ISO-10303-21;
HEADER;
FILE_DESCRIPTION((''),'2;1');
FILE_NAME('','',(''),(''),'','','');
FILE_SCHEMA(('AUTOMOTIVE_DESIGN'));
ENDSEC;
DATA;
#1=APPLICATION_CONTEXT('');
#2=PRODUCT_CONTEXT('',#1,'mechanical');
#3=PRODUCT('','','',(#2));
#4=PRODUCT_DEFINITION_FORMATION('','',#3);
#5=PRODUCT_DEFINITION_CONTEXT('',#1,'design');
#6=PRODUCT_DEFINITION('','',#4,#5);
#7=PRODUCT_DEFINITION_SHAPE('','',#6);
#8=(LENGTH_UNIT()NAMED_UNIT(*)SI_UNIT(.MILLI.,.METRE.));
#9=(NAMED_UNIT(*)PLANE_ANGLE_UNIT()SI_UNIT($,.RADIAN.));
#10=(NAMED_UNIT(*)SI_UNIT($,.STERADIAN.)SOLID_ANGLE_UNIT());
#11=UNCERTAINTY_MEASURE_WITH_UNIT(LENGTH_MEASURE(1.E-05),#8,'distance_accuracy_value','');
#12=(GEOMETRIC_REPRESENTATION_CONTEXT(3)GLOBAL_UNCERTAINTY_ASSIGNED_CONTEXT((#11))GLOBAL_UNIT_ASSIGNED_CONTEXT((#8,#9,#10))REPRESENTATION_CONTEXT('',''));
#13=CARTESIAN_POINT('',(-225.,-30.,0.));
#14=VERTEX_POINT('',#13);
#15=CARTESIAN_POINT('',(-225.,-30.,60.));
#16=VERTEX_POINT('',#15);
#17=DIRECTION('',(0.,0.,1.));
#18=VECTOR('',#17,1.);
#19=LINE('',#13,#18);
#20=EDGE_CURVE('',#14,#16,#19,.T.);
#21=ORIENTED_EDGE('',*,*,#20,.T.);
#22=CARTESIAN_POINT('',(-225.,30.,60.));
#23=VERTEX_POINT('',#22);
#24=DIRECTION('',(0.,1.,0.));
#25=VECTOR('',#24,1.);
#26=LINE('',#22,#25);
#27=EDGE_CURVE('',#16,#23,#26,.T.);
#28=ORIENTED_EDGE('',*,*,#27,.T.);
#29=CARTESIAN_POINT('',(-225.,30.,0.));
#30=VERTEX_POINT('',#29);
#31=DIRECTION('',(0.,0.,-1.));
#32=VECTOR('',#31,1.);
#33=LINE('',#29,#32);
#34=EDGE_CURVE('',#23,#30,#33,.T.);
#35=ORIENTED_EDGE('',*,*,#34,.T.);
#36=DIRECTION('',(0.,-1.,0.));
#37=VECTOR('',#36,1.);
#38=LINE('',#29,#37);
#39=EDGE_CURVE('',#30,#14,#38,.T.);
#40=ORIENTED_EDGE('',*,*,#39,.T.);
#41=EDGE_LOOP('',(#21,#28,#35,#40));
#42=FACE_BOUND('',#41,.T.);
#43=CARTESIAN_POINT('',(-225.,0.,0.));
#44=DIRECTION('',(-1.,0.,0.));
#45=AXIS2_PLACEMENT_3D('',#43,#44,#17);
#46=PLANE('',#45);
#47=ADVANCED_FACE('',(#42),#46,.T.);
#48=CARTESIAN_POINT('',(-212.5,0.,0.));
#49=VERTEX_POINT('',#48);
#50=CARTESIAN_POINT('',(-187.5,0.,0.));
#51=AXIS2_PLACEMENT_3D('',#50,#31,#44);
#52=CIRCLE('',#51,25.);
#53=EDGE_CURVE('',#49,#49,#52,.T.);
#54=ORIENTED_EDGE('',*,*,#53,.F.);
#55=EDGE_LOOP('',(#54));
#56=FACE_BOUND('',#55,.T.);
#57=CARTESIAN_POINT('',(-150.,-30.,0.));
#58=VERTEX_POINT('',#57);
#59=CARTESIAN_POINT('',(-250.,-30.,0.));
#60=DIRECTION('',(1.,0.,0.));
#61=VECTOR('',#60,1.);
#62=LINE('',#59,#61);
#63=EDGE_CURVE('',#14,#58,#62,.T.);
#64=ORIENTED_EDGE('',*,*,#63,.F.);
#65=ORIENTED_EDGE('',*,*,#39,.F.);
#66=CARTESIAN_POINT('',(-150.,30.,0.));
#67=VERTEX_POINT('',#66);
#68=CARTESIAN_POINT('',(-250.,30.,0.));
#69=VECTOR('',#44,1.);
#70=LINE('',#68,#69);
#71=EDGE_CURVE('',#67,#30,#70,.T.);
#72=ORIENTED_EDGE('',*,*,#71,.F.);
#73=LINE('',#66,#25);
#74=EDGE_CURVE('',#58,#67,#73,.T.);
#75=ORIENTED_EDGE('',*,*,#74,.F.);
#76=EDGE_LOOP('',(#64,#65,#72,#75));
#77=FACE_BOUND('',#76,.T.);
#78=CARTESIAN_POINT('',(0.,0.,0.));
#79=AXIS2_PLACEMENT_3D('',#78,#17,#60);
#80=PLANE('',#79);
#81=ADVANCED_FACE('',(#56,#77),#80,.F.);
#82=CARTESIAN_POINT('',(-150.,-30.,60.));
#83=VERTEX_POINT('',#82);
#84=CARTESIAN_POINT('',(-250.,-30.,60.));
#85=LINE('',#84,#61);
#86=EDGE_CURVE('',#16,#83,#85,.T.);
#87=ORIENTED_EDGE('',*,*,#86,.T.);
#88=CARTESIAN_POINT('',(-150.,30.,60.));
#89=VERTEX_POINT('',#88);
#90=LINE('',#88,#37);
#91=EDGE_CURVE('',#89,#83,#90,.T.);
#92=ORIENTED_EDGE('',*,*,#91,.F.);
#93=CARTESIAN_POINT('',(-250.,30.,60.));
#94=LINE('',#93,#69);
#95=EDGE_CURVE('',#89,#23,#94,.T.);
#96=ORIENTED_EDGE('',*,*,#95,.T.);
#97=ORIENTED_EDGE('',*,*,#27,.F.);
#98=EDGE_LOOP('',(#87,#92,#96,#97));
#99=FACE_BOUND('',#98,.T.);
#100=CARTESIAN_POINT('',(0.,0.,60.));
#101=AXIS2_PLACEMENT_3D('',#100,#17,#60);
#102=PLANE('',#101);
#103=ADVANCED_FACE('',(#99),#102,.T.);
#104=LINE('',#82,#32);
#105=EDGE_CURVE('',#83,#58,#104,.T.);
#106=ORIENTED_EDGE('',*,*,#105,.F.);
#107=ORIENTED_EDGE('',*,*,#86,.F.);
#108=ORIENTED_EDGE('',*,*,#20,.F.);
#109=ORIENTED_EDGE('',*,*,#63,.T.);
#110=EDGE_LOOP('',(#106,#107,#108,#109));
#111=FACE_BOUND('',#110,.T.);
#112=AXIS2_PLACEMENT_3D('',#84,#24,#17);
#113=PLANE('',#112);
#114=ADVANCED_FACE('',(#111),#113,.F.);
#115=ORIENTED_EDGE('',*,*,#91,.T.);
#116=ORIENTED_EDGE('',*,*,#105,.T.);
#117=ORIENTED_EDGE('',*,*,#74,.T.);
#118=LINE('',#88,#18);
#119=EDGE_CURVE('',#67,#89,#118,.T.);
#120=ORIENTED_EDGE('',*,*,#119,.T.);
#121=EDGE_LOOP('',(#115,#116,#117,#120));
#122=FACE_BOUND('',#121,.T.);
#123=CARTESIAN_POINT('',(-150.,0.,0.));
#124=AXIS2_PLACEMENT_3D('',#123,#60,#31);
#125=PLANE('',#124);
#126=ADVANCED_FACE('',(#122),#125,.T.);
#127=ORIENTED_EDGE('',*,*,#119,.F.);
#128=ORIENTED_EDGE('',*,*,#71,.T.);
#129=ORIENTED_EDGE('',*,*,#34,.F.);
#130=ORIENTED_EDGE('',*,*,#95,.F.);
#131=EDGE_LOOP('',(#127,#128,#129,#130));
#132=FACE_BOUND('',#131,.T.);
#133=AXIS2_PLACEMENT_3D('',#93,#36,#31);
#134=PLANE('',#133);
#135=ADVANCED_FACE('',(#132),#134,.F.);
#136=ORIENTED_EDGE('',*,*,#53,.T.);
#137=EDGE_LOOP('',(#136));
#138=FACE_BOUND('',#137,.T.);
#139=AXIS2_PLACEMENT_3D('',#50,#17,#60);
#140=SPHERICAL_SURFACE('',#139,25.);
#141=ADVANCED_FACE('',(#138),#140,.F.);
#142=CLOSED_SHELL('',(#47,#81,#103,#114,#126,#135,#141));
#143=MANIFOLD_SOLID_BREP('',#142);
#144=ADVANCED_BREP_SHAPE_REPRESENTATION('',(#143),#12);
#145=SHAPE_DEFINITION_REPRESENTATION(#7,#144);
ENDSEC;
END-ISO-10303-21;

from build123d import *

# Parameters (mm, degrees)
SZKIC1_W                    = 500
SZKIC1_H                    = 60
DODANIE_WYCI_GNI_CIE1_DEPTH = 60
SZKIC2_R                    = 25
WYTNIJ_WYCI_GNI_CIE1_DEPTH  = 25
ZAOKR_GLENIE2_R             = 25
SZKIC5_W                    = 60
SZKIC5_H                    = 60
WYTNIJ_WYCI_GNI_CIE2_DEPTH  = 400
SZKIC6_W                    = 60
SZKIC6_H                    = 60
WYTNIJ_WYCI_GNI_CIE4_DEPTH  = 25


with BuildPart() as part:
    # Szkic1 → Dodanie-wyciągnięcie1 (new body)
    with BuildSketch(Plane.XY):
        Rectangle(SZKIC1_W, SZKIC1_H)
    extrude(amount=DODANIE_WYCI_GNI_CIE1_DEPTH)

    # Szkic2 → Wytnij-wyciągnięcie1 (cut)
    with BuildSketch(Plane(origin=(0, 0, 0), x_dir=(-1, 0, 0), z_dir=(0, 0, -1))):
        with Locations((-187.5, 0)):
            Circle(SZKIC2_R)
        with Locations((-125, 0)):
            Circle(SZKIC2_R)
        with Locations((-62.5, 0)):
            Circle(SZKIC2_R)
        Circle(SZKIC2_R)
        with Locations((62.5, 0)):
            Circle(SZKIC2_R)
        with Locations((125, 0)):
            Circle(SZKIC2_R)
        with Locations((187.5, 0)):
            Circle(SZKIC2_R)
    extrude(amount=-WYTNIJ_WYCI_GNI_CIE1_DEPTH, mode=Mode.SUBTRACT)

    # Zaokrąglenie2
    zaokr_glenie2_edges = [part.edges().sort_by_distance(p)[0] for p in [
        (212.5, 0, 25),
        (150, 0, 25),
        (87.5, 0, 25),
        (25, 0, 25),
        (-37.5, 0, 25),
        (-100, 0, 25),
        (-162.5, 0, 25),
    ]]
    fillet(zaokr_glenie2_edges, radius=ZAOKR_GLENIE2_R - 0.0001)  # a hair under: the kernel refuses the full size

    # Szkic5 → Wytnij-wyciągnięcie2 (cut)
    with BuildSketch(Plane(origin=(250, 0, 0), x_dir=(0, 0, -1), z_dir=(1, 0, 0))):
        with Locations((-30, 0)):
            Rectangle(SZKIC5_W, SZKIC5_H)
    extrude(amount=-WYTNIJ_WYCI_GNI_CIE2_DEPTH, mode=Mode.SUBTRACT)

    # Szkic6 → Wytnij-wyciągnięcie4 (cut)
    with BuildSketch(Plane.ZY.offset(250)):
        with Locations((30, 0)):
            Rectangle(SZKIC6_W, SZKIC6_H)
    extrude(amount=-WYTNIJ_WYCI_GNI_CIE4_DEPTH, mode=Mode.SUBTRACT)


solid = part.part
